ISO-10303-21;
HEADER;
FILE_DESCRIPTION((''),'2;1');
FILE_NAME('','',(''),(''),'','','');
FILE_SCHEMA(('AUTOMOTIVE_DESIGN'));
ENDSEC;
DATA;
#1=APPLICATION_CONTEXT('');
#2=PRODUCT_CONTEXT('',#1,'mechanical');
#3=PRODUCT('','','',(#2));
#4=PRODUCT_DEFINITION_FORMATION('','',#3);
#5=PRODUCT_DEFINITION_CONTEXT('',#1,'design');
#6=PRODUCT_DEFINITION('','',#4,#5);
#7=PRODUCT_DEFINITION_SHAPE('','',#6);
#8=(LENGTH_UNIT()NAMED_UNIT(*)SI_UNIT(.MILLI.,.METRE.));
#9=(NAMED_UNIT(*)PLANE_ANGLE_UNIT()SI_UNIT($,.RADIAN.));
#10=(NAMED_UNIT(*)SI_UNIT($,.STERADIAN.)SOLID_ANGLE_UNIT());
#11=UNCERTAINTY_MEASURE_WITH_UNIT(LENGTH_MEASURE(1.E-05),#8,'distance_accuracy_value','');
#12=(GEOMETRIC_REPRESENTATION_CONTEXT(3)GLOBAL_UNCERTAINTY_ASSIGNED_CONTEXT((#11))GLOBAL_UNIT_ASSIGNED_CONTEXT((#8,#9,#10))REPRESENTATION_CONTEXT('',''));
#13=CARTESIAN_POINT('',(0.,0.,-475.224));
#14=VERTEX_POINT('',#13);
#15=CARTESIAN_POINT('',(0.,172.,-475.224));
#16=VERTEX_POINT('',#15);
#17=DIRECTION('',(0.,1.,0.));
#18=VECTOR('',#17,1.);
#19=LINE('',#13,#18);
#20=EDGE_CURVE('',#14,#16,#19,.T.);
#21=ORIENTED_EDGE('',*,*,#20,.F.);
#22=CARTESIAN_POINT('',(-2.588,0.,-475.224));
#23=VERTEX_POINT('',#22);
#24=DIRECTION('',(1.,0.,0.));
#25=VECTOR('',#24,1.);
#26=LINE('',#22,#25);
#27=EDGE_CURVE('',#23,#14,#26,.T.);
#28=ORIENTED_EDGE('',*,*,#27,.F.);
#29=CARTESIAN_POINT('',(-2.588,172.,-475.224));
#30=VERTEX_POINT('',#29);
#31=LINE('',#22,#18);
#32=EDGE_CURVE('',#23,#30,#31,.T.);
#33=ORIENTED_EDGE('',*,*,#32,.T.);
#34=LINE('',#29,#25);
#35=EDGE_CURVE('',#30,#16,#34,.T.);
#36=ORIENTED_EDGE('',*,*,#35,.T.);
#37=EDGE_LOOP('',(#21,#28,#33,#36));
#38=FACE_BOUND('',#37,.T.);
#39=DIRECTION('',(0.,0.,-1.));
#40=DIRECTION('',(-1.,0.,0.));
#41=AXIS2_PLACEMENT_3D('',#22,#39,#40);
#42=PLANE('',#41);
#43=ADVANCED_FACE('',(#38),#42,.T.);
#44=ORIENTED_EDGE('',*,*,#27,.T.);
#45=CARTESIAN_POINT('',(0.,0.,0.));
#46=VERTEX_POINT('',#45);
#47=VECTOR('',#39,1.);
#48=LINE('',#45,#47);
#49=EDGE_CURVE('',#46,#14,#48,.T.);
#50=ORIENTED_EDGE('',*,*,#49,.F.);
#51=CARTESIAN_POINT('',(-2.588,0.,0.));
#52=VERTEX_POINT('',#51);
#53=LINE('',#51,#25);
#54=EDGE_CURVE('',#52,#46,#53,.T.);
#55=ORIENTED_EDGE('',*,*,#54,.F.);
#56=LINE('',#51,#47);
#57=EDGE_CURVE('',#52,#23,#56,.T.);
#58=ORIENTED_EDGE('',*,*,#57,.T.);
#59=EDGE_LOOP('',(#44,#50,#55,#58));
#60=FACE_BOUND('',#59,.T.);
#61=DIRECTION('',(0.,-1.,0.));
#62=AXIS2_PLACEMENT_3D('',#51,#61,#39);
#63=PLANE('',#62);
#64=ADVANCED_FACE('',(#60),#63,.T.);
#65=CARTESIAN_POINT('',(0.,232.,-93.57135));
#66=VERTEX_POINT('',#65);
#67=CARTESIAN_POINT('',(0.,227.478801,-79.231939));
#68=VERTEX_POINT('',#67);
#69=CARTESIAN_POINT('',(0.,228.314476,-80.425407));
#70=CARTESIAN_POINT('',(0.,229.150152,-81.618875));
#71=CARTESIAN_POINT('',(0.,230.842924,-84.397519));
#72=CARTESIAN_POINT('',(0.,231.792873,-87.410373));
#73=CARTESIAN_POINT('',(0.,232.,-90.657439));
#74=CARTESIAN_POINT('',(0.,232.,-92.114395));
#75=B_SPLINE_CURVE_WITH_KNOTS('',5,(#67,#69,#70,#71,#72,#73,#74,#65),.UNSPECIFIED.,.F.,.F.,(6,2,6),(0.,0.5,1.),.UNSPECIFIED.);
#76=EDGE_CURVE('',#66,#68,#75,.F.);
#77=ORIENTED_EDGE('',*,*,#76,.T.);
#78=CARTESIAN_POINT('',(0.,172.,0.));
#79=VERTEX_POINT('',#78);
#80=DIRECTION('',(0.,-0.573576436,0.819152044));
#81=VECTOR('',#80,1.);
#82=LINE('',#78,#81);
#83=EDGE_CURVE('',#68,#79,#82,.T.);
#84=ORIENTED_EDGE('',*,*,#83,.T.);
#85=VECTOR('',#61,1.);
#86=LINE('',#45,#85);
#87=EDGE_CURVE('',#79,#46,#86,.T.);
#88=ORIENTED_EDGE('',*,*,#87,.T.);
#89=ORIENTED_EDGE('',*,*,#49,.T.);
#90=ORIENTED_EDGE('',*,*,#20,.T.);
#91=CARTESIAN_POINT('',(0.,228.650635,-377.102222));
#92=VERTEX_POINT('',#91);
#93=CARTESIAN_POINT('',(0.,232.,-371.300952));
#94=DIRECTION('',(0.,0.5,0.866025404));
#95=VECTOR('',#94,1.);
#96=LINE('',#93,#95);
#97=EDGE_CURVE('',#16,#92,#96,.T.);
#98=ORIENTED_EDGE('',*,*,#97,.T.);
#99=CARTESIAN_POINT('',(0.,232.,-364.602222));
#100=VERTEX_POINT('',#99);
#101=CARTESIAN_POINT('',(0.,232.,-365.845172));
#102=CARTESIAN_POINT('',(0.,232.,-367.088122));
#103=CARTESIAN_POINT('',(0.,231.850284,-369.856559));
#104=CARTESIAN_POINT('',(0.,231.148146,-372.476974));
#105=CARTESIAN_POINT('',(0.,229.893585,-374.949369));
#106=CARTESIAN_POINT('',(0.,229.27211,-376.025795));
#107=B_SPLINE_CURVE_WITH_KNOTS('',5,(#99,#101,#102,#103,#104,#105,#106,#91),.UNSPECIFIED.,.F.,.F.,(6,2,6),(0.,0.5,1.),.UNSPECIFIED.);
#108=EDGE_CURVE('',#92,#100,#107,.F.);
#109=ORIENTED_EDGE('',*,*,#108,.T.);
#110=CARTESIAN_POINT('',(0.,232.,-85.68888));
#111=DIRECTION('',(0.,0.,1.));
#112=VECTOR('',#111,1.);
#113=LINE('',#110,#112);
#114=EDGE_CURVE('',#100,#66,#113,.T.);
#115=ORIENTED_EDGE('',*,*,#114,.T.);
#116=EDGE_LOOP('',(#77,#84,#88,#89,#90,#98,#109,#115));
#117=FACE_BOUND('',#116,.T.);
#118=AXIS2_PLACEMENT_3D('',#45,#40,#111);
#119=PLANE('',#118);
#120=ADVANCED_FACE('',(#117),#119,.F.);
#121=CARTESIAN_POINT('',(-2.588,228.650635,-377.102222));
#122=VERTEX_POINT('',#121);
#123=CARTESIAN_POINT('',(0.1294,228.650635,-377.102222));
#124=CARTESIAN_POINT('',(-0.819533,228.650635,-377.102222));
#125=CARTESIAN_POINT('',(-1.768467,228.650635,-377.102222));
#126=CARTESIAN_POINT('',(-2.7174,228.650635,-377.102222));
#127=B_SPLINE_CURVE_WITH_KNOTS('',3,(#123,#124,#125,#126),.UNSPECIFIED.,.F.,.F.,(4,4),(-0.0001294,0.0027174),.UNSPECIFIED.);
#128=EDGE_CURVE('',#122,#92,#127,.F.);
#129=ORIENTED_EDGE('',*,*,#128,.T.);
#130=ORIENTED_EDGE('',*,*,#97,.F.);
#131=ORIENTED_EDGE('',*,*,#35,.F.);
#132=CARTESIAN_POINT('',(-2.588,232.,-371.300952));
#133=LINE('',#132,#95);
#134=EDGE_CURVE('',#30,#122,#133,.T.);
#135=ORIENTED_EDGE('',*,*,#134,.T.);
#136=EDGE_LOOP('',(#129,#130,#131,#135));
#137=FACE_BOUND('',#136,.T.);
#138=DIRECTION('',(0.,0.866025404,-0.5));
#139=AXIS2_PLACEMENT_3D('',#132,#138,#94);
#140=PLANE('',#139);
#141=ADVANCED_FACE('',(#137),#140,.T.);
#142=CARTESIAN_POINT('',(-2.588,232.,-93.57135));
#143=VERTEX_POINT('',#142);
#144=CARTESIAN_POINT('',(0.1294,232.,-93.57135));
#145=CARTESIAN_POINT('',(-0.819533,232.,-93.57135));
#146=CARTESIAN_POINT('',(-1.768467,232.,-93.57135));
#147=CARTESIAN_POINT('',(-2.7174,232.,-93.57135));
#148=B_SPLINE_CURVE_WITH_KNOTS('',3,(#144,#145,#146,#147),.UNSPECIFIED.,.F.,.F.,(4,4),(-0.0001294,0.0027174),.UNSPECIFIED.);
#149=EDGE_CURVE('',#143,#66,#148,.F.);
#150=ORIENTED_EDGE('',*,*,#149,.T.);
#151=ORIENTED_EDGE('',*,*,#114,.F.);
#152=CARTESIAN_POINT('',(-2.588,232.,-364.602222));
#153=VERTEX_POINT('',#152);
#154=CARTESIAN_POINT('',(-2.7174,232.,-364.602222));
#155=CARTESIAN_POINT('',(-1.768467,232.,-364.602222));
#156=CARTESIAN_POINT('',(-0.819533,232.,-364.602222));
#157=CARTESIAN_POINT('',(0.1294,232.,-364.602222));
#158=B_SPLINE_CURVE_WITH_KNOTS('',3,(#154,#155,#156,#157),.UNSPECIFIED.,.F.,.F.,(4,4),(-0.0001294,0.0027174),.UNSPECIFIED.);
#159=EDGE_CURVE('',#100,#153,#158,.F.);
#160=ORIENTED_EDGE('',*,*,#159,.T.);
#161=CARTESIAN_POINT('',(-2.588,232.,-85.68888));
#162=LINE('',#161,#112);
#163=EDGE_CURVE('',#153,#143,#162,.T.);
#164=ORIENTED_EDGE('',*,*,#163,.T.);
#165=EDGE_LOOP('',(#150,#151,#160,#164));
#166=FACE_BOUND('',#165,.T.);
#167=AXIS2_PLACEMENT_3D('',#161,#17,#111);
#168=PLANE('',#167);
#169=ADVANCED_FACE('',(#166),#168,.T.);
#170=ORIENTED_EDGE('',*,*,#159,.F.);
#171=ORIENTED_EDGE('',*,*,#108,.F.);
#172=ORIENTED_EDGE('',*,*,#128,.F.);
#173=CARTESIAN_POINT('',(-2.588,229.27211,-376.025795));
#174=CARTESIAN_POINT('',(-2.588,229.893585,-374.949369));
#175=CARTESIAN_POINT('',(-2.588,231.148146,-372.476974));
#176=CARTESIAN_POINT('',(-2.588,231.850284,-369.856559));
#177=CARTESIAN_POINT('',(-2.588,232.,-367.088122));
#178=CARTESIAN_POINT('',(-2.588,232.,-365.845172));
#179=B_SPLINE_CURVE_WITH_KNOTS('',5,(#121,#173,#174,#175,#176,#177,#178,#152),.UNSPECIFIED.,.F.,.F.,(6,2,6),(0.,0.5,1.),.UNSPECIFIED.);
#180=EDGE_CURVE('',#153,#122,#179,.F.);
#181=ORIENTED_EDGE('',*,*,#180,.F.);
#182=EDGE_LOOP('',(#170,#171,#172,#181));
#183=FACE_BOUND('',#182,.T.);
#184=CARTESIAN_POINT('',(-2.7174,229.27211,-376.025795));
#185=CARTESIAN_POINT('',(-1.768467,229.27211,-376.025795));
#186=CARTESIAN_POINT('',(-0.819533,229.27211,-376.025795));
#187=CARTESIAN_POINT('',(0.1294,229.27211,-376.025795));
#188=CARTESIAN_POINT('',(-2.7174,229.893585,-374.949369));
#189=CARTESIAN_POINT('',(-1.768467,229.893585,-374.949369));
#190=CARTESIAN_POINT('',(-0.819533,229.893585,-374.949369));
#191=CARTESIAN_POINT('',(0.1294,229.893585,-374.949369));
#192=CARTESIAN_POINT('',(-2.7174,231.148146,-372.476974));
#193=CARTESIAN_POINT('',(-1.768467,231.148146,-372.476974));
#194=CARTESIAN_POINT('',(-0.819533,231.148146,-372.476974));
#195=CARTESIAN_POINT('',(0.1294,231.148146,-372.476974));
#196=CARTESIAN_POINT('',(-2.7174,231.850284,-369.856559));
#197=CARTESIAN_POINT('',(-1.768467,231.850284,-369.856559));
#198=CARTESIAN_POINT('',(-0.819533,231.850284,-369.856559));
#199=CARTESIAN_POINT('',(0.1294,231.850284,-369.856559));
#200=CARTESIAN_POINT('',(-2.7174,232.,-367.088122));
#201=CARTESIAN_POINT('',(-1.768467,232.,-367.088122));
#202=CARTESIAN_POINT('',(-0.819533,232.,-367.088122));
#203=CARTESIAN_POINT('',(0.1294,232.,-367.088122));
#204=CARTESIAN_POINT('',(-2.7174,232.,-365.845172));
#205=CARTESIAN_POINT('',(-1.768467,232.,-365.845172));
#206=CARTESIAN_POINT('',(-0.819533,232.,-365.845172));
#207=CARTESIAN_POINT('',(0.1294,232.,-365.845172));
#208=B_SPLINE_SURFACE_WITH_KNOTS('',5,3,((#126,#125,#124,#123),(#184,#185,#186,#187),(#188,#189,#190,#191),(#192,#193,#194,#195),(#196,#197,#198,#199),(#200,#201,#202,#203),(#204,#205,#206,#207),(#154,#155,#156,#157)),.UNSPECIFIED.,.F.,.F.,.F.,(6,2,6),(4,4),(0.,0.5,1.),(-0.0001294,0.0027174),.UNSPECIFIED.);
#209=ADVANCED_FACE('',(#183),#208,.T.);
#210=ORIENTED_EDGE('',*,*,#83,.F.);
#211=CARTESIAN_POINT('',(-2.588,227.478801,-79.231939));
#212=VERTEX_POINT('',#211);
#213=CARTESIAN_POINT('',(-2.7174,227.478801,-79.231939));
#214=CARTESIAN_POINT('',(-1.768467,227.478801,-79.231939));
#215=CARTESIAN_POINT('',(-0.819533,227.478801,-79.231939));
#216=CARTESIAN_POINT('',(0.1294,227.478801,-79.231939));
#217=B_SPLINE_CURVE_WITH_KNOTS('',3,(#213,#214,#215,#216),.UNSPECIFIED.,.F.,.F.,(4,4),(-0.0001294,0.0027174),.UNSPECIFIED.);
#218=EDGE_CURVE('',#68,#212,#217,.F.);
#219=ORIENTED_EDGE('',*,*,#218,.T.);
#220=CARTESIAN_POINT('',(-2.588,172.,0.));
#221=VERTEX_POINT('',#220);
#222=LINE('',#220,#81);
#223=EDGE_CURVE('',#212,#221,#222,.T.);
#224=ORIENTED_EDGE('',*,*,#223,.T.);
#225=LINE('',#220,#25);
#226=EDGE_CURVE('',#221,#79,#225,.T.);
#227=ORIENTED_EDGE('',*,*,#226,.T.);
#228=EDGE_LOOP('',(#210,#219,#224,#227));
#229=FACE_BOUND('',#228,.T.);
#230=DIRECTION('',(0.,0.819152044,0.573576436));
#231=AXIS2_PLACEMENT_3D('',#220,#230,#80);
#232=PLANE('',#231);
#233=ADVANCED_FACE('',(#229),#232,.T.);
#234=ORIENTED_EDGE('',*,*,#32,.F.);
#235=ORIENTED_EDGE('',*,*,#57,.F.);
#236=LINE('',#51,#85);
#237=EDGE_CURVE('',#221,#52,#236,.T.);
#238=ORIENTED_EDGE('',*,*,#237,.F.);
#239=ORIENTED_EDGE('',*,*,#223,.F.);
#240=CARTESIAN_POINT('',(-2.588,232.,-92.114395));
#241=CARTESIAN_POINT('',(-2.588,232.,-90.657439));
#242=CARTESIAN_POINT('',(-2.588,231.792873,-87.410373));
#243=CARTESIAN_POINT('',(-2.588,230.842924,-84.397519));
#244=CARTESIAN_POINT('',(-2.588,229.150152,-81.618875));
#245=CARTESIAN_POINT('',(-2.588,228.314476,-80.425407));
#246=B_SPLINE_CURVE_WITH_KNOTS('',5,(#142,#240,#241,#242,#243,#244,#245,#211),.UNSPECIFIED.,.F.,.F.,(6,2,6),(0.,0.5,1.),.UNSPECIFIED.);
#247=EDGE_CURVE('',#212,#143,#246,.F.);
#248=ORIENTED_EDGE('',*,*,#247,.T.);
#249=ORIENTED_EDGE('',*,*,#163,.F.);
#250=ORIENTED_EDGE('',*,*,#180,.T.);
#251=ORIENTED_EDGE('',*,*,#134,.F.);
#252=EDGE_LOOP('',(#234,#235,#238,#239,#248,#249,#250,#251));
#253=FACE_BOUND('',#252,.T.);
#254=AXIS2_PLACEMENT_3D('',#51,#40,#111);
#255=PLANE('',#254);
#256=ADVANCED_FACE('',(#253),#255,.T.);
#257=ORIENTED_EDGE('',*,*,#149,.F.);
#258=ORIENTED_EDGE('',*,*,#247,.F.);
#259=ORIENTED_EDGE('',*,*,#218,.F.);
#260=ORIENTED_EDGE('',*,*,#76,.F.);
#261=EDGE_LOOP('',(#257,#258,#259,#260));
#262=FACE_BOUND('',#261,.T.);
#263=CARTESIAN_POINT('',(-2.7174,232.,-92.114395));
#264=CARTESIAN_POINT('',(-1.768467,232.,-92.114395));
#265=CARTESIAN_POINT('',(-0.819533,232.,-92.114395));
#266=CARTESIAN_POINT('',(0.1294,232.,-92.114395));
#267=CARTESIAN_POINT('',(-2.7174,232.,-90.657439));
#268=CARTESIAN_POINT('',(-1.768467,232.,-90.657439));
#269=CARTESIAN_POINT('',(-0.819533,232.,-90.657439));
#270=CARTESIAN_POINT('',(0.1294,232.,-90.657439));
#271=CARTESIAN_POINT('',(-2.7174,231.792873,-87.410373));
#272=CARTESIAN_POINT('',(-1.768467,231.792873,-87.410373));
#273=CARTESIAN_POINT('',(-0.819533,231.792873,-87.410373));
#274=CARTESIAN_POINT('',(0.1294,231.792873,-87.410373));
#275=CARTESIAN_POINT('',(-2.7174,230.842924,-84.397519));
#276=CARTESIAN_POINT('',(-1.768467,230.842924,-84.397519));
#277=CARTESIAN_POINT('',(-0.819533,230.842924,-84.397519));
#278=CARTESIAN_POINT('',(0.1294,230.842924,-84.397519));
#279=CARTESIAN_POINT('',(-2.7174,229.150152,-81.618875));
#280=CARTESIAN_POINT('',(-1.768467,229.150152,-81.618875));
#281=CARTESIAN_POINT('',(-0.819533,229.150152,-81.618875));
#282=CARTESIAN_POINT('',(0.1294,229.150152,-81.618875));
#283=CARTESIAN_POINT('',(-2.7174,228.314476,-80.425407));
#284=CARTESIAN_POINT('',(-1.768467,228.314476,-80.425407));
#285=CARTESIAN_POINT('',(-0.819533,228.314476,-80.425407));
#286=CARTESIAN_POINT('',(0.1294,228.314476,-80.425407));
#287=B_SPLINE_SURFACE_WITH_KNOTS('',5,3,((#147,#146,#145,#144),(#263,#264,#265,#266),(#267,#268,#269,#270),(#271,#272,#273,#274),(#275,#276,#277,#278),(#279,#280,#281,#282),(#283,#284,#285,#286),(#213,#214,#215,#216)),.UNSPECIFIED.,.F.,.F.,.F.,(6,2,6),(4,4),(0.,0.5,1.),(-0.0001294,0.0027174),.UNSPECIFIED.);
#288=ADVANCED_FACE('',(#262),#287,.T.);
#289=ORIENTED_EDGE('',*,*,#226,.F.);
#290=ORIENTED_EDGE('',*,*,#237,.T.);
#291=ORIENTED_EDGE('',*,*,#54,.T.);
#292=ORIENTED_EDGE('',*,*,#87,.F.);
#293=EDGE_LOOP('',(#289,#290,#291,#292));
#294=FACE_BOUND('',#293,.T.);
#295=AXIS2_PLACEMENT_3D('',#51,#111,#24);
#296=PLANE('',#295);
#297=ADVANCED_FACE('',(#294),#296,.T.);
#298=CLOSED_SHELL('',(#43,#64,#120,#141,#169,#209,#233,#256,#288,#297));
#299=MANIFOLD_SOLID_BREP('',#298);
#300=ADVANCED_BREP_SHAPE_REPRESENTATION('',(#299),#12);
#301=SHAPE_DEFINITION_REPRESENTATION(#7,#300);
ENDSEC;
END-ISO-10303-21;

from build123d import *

# Parameters (mm, degrees)
BASE_FLANGE1_DEPTH = 2.588


# Sheet-metal steps are written as plain solids
with BuildPart() as part:
    # Base-Flange1: sheet metal written as solids
    # Sketch1 → Base-Flange1 (new body)
    with BuildSketch(Plane(origin=(0, 0, 0), x_dir=(0, 0, -1), z_dir=(1, 0, 0))):
        Polygon((0, 172), (85.688880405, 232), (371.300951546, 232), (475.224, 172), (475.224, 0), (0, 0), align=None)
    extrude(amount=-BASE_FLANGE1_DEPTH)

    # Fillet1
    # a fillet whose section is not a circle: 25 mm, written as the material it takes off along each edge
    with BuildSketch(Plane(origin=(19.706174305, 232, -85.688880405), x_dir=(0, -0.5735764363510439, 0.8191520442889934), z_dir=(-1, 0, 0))) as fillet1_piece_1:
        with BuildLine():
            add(Edge.make_bspline([(7.882469722, 0), (6.425514187, 0), (4.968558652, 0), (1.72149306, -0.207126843), (-1.291361483, -1.157076231), (-4.070004977, -2.849848165), (-5.263473082, -3.685523529), (-6.456941187, -4.521198893)], knots=[0, 0, 0, 0, 0, 0, 0.5, 0.5, 1, 1, 1, 1, 1, 1], degree=5))
            Line((-6.456941187, -4.521198893), (0, 0))
            Line((0, 0), (7.882469722, 0))
        make_face()
    extrude(amount=42.00034861, mode=Mode.SUBTRACT)
    with BuildSketch(Plane(origin=(16.746824527, 232, -371.300951546), x_dir=(0, 0, 1), z_dir=(-1, 0, 0))) as fillet1_piece_2:
        with BuildLine():
            add(Edge.make_bspline([(6.698729811, 0), (5.455779776, 0), (4.212829741, 0), (1.444392876, -0.149716053), (-1.176022897, -0.851854343), (-3.648417578, -2.106414871), (-4.724843884, -2.727889888), (-5.801270189, -3.349364905)], knots=[0, 0, 0, 0, 0, 0, 0.5, 0.5, 1, 1, 1, 1, 1, 1], degree=5))
            Line((-5.801270189, -3.349364905), (0, 0))
            Line((0, 0), (6.698729811, 0))
        make_face()
    extrude(amount=36.081649054, mode=Mode.SUBTRACT)


solid = part.part
